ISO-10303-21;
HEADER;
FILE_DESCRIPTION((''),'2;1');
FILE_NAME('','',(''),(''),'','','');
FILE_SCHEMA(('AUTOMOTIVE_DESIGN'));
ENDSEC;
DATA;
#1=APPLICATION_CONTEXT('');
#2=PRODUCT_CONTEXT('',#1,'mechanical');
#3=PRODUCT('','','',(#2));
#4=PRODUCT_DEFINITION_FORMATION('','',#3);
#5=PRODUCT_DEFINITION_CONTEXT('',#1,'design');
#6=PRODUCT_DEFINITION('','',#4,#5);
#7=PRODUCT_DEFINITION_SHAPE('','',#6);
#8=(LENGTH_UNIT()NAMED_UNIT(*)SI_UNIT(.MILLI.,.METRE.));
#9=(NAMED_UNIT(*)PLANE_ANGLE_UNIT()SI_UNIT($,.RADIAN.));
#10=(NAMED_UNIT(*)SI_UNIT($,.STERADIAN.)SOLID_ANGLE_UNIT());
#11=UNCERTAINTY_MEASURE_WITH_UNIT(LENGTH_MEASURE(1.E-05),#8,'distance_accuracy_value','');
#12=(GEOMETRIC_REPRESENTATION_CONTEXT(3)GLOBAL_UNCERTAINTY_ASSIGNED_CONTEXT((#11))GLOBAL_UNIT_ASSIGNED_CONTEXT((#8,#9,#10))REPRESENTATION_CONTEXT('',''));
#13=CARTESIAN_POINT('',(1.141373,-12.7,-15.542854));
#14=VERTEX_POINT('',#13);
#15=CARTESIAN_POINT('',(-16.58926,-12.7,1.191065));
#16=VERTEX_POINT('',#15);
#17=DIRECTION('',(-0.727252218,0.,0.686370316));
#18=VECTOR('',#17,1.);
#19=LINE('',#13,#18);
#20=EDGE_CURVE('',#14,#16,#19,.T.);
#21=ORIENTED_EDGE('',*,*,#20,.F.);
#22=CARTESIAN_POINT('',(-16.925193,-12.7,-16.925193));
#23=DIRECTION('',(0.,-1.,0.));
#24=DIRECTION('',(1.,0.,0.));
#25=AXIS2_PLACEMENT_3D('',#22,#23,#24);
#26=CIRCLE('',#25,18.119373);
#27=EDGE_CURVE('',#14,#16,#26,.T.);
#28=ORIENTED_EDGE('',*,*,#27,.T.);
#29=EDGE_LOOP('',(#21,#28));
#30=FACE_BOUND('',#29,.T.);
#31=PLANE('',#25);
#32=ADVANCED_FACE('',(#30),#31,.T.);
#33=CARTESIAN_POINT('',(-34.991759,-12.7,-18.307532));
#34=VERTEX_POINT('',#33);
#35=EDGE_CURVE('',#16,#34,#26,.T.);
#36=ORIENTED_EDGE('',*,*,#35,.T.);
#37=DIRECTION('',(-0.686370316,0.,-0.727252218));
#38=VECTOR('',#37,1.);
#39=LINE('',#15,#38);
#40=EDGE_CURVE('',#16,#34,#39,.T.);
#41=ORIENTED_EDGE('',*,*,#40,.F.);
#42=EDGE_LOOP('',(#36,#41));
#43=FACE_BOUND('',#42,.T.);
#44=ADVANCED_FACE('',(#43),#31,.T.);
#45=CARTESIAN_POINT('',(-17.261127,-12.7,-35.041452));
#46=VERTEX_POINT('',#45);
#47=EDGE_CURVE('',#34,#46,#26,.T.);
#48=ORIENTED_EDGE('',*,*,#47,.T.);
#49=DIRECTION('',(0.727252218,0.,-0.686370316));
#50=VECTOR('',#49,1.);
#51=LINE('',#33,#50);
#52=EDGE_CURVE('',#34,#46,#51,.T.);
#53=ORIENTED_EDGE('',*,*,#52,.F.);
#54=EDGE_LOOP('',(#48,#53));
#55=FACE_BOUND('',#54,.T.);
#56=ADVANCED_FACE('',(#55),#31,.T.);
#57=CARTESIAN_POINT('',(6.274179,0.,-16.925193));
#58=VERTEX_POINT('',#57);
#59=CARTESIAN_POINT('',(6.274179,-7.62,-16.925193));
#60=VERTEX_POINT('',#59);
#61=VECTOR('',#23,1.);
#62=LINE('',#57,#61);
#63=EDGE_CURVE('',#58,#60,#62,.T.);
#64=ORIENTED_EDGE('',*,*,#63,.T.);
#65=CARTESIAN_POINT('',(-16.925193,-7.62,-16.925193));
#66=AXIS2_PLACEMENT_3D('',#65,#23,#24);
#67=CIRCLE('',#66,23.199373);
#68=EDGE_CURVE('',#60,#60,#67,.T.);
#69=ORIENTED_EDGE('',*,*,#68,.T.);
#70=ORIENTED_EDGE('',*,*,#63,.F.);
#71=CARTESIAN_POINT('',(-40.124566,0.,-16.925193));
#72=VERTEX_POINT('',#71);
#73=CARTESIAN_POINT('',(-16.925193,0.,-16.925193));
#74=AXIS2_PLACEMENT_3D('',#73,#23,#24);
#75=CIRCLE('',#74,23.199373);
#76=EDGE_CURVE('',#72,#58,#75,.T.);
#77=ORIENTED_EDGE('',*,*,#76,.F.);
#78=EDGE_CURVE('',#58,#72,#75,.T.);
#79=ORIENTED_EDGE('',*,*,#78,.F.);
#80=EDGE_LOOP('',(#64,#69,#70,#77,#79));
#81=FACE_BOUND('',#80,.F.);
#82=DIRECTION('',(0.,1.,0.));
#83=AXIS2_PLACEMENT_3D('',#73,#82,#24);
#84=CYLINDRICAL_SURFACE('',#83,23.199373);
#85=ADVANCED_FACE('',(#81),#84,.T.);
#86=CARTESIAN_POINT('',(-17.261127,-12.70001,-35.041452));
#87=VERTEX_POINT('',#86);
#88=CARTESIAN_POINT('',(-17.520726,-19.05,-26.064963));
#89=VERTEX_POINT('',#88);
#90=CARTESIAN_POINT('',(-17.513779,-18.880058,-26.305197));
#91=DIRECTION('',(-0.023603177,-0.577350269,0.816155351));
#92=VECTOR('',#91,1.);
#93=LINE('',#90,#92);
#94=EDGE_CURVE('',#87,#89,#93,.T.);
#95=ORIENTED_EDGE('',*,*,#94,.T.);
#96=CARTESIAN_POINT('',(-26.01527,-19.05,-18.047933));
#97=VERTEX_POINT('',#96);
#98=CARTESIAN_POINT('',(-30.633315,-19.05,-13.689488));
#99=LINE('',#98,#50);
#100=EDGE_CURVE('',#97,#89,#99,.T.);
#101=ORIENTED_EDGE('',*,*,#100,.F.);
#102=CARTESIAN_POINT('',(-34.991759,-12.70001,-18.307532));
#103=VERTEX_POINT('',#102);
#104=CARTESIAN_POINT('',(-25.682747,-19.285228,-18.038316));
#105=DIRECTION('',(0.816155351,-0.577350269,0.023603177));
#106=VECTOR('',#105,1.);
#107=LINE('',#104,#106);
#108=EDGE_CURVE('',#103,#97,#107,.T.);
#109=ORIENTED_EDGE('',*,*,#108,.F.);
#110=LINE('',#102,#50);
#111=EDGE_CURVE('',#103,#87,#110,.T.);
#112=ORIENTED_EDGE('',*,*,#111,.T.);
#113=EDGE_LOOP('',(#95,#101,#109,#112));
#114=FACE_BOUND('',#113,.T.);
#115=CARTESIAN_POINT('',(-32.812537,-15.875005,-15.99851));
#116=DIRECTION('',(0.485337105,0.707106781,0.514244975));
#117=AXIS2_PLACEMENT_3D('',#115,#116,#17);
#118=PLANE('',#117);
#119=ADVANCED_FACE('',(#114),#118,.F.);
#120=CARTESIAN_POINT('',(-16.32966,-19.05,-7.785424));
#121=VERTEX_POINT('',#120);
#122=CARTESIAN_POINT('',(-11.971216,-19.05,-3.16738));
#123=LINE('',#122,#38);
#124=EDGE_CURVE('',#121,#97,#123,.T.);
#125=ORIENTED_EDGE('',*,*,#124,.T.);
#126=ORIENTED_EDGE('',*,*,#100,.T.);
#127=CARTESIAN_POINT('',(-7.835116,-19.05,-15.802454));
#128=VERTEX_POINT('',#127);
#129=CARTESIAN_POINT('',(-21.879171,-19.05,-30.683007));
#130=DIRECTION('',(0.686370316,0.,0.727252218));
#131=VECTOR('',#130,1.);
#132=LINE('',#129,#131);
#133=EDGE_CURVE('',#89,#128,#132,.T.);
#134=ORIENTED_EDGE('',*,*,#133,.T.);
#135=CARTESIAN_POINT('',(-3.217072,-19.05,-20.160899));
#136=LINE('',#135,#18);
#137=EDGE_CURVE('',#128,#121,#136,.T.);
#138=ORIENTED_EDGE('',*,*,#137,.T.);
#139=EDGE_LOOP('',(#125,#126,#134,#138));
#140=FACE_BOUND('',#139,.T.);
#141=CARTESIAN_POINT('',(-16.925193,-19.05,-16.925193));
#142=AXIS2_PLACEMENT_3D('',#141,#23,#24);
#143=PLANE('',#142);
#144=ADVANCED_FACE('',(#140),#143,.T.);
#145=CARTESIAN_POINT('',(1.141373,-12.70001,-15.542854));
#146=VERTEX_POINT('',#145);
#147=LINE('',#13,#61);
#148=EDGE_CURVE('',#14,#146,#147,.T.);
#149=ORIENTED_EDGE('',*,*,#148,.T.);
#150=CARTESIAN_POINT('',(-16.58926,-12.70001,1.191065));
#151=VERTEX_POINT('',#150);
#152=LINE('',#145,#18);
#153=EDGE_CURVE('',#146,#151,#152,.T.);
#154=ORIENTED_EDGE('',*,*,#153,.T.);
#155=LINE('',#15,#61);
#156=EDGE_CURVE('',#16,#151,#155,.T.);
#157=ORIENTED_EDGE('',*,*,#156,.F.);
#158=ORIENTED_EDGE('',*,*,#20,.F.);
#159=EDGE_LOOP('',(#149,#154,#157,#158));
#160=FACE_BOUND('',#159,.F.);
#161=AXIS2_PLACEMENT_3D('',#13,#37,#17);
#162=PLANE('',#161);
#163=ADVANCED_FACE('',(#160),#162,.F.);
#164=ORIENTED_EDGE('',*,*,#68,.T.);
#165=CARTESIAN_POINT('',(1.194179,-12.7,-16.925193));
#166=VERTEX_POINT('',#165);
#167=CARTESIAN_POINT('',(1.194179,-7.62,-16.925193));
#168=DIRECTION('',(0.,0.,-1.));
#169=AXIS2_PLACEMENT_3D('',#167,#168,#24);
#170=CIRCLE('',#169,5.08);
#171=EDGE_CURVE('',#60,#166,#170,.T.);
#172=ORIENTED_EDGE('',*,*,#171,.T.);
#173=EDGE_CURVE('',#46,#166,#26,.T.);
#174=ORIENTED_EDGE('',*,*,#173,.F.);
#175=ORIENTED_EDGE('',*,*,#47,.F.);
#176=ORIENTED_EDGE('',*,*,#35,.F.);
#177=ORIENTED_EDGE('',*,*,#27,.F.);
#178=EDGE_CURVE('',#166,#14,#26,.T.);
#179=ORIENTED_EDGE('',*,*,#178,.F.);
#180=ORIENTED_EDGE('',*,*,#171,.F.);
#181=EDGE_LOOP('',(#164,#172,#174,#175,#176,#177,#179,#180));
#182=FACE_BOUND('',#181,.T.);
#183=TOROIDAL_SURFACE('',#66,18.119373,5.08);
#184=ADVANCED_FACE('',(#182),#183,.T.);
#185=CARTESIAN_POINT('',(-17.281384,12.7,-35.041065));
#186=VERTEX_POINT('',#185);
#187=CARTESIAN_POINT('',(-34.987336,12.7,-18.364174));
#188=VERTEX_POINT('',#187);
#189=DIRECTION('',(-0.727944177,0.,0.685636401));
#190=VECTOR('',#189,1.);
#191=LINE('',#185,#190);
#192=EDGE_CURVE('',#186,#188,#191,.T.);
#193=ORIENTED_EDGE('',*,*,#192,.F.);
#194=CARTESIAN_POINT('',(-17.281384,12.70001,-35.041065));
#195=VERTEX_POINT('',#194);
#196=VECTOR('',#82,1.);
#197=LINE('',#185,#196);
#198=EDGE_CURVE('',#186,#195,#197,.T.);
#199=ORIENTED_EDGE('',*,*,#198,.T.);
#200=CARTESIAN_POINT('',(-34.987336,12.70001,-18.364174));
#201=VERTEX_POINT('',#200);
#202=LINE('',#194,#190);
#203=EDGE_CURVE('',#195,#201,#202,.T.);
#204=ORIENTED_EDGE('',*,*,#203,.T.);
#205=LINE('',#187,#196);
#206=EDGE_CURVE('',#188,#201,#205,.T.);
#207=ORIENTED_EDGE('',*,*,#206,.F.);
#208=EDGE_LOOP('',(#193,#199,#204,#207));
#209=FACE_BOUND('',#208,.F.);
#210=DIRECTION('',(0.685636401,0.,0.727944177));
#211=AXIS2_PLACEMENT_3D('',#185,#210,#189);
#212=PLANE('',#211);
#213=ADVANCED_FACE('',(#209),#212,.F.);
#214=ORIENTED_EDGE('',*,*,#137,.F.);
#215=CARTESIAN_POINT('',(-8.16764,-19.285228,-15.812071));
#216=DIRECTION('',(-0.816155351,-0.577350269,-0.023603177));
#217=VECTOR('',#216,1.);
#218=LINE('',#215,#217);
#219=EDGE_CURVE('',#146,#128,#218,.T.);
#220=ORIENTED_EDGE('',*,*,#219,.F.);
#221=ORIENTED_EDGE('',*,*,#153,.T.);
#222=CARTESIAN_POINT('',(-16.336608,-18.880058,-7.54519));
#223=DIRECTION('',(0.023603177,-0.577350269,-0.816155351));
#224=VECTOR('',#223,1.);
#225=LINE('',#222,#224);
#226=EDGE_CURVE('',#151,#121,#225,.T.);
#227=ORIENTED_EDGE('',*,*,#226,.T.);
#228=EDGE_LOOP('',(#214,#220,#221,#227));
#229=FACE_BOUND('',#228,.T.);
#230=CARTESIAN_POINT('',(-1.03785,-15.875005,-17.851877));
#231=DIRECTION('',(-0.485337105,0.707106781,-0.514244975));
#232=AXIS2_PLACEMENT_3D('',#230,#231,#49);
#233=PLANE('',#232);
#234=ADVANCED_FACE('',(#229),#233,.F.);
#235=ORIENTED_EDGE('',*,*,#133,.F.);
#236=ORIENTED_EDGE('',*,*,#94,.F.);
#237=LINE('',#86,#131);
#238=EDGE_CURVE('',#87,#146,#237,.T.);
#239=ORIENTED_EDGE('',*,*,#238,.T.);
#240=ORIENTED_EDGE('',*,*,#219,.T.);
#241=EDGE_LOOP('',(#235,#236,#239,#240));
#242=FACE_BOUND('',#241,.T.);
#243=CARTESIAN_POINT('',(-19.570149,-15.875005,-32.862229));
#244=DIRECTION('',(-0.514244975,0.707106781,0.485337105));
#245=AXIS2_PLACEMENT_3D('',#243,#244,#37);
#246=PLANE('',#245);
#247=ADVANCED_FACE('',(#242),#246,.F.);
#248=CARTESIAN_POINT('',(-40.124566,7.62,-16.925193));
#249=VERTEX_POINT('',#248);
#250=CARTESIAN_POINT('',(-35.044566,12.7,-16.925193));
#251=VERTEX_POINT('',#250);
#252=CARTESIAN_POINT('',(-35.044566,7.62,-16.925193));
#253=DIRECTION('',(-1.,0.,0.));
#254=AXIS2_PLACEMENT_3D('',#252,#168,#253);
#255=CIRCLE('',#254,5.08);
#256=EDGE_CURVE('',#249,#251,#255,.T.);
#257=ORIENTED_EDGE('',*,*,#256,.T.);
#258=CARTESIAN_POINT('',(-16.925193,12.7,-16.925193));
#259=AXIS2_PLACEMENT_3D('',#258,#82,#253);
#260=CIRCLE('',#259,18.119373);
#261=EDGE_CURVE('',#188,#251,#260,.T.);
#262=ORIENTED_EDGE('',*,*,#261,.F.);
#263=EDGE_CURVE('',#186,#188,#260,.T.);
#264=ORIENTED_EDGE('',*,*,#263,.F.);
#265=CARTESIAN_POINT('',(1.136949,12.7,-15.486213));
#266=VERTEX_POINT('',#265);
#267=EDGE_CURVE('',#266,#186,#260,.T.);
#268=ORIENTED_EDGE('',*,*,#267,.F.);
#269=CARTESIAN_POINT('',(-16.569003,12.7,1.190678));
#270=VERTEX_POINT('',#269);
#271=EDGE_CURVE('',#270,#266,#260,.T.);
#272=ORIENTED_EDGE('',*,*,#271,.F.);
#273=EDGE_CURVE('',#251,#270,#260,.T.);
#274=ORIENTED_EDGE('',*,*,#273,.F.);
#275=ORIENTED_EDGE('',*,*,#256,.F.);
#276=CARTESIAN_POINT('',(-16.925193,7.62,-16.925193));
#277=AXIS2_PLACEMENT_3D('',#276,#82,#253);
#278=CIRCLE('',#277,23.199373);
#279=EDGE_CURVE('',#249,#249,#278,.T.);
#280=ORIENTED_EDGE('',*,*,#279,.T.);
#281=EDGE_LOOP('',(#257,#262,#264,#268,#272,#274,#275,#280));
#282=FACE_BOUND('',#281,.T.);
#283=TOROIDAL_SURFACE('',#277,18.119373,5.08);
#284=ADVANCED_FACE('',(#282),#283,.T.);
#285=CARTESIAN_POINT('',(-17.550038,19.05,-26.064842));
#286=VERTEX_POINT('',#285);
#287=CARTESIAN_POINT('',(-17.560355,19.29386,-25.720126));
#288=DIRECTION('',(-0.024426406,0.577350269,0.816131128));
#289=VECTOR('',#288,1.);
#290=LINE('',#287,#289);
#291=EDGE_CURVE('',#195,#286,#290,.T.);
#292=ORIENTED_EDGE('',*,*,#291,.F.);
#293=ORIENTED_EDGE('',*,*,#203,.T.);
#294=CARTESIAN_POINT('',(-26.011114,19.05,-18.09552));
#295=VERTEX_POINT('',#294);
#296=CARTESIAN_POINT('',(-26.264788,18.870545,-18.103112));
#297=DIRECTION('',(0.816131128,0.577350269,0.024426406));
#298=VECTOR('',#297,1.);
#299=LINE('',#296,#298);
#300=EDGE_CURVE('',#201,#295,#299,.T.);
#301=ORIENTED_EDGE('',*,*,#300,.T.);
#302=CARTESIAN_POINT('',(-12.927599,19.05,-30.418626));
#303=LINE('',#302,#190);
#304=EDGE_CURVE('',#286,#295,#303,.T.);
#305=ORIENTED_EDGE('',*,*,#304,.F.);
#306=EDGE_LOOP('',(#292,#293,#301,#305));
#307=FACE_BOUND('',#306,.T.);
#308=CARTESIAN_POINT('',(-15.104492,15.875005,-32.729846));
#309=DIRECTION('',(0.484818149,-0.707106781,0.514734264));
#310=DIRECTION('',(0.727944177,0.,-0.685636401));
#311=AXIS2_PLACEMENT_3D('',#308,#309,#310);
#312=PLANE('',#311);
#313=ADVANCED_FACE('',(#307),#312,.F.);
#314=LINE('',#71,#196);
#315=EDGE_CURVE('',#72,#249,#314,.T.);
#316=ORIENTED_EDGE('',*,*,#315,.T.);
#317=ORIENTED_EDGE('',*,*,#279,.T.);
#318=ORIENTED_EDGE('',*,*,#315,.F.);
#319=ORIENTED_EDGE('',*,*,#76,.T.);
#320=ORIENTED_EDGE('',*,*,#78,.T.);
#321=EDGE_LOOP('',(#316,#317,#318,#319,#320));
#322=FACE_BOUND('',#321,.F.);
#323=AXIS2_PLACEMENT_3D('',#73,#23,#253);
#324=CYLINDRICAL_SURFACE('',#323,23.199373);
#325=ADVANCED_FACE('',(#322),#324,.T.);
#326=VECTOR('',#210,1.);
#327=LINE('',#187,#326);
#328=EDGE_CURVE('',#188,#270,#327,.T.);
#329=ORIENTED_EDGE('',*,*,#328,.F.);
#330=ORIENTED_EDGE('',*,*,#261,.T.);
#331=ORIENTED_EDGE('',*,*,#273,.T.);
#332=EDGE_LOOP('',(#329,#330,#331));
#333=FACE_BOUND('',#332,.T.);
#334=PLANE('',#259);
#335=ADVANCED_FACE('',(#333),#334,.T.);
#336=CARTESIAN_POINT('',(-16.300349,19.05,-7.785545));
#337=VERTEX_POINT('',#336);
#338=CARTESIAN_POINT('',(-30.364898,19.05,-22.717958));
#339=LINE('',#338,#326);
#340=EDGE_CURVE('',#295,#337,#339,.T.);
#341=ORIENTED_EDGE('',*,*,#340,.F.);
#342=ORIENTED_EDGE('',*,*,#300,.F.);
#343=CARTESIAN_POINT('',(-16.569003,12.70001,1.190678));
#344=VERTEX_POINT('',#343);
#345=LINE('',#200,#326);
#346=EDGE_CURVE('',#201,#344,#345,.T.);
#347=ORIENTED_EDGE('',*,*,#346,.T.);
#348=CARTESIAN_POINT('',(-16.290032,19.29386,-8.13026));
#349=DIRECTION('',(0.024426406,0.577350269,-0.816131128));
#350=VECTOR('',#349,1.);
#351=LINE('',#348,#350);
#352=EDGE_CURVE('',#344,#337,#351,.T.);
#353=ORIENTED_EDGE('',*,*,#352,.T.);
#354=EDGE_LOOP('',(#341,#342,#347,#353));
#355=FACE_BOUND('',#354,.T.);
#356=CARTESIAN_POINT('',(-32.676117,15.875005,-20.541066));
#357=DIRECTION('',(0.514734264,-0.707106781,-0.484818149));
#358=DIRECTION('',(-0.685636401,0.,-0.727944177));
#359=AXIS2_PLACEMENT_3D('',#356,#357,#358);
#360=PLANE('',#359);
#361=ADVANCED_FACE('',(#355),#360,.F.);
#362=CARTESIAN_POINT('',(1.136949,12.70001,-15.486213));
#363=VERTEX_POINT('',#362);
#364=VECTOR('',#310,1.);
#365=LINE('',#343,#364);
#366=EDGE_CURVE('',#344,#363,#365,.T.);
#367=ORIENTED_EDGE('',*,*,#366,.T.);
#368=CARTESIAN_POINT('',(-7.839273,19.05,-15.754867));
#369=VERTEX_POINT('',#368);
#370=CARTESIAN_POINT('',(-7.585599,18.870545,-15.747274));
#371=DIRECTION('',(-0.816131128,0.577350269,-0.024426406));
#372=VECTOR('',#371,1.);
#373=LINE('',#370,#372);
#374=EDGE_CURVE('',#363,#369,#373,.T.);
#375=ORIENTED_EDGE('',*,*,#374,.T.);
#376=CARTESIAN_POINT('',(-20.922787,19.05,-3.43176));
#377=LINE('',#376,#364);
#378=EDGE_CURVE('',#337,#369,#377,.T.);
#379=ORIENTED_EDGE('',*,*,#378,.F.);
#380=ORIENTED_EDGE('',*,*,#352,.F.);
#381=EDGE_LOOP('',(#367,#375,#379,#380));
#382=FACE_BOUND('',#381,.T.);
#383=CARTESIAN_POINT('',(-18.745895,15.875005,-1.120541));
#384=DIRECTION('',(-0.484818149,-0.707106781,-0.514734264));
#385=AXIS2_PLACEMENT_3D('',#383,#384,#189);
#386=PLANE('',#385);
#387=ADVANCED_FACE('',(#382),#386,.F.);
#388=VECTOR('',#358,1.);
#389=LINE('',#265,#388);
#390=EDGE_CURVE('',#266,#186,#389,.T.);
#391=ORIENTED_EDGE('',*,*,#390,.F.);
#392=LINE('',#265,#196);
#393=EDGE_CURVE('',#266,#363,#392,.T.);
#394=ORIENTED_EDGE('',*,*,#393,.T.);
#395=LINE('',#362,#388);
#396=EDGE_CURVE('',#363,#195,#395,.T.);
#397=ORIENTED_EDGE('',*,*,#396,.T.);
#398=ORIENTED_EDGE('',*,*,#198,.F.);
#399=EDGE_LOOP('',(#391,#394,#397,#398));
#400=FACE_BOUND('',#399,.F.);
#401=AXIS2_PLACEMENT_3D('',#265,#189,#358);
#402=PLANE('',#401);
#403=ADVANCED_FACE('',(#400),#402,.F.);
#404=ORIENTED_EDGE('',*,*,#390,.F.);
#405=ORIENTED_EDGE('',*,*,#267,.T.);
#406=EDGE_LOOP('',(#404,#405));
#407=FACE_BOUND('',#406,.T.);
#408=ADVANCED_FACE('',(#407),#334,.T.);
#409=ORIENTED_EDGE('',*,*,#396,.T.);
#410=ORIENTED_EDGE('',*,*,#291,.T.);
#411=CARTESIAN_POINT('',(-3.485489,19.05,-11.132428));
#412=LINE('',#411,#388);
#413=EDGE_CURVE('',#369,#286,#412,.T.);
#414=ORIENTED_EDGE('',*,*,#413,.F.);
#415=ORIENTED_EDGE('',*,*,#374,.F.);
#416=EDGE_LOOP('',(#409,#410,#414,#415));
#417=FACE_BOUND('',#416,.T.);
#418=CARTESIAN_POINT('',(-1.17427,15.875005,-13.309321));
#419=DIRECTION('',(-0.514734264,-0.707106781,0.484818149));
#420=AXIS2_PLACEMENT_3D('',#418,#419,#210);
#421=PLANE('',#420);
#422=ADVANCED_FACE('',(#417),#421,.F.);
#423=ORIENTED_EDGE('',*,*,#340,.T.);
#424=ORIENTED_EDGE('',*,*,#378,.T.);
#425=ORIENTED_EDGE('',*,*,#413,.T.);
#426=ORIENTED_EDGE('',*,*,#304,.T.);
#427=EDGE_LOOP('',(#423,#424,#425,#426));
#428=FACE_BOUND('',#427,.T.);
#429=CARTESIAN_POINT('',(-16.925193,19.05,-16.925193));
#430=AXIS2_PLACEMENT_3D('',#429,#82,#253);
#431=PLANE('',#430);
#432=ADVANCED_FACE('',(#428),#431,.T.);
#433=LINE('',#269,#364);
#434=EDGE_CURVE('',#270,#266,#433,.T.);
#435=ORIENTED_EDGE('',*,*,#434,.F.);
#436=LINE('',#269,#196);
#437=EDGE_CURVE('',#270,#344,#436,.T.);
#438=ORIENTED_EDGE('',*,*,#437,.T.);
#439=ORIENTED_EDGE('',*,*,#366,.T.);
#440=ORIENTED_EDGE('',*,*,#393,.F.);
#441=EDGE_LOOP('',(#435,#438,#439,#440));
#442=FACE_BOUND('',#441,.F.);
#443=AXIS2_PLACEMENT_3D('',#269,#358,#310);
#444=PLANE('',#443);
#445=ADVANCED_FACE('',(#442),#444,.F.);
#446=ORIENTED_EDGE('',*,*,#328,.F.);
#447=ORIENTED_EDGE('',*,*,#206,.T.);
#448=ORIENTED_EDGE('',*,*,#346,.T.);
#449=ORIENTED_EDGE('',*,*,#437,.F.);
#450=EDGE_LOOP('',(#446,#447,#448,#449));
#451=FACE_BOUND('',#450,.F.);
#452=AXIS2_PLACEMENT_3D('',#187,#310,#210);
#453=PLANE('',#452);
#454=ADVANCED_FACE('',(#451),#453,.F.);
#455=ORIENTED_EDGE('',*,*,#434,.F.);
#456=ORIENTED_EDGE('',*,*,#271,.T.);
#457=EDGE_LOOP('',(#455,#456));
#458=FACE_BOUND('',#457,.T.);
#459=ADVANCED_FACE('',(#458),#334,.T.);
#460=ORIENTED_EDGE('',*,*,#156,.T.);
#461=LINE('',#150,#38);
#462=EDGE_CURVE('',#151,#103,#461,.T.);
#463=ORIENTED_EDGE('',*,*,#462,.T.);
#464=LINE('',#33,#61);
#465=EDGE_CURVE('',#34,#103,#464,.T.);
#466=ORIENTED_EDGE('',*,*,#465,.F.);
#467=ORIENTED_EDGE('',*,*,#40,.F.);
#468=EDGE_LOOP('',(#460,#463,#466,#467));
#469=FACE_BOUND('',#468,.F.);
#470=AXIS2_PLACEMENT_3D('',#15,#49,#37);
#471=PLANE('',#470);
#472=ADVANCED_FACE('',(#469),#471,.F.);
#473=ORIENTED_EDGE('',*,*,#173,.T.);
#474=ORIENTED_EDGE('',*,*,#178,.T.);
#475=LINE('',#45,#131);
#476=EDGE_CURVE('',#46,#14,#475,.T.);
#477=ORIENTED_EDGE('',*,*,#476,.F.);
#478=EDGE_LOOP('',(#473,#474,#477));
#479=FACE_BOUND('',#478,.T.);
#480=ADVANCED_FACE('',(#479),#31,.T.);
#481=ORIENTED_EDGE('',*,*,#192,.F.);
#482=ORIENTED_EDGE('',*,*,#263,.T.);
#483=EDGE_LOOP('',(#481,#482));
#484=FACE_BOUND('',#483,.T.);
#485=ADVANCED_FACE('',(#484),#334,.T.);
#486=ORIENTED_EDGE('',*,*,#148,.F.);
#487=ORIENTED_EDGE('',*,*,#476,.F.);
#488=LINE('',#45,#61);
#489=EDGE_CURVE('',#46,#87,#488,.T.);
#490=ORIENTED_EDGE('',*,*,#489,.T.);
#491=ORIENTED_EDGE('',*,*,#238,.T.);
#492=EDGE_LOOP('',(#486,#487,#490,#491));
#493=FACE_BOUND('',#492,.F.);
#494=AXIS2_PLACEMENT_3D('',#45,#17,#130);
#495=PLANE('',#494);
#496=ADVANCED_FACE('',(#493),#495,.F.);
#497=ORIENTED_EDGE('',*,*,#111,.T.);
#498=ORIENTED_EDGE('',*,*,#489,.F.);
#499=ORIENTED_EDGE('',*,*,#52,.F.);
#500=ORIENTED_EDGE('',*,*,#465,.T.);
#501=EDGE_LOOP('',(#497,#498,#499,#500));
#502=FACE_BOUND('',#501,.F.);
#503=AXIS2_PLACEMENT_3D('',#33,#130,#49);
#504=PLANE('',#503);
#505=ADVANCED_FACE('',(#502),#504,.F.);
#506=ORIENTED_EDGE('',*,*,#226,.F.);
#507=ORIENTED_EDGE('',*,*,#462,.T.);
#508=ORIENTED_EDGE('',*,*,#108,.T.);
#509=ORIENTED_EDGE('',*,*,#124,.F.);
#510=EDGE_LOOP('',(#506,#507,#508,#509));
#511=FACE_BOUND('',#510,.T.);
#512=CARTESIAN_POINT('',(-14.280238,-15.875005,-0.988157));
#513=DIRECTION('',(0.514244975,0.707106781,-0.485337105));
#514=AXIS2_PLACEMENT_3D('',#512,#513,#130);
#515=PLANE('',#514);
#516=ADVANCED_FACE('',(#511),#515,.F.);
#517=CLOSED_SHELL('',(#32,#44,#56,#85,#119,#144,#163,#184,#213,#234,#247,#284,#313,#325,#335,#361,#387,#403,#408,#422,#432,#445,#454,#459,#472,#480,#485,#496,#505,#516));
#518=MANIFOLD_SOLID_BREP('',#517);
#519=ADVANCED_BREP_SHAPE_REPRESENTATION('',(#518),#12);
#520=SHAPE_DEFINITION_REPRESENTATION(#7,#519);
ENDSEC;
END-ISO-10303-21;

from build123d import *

# Parameters (mm, degrees)
F0_R     = 23.1993727041
F1_DEPTH = 12.7
F2_R     = 23.1993727041
F3_DEPTH = 12.7
F4_R     = 5.08
F7_DEPTH = 6.35
F8_DEPTH = 6.35
F9_SIZE  = 6.34999
F10_SIZE = 6.34999


# Not quite as in the source:
# - a fillet or chamfer is up to 0.001 mm smaller than in the source, because OpenCascade refuses the exact size


with BuildPart() as f1:
    # F0 (on Front) → F1 (new body)
    with BuildSketch(Plane.XZ):
        with Locations((-16.9251933694, -16.9251933694)):
            Circle(F0_R)
    extrude(amount=F1_DEPTH)

    # F2 (on face) → F3 (join)
    with BuildSketch(Plane(origin=(0, 0, 0), x_dir=(-1, 0, 0), z_dir=(0, 1, 0))):
        with Locations((16.9251933694, -16.9251933694)):
            Circle(F2_R)
    extrude(amount=F3_DEPTH)

    # F4
    f4_edges = [f1.edges().sort_by_distance(p)[0] for p in [
        (6.274179, 12.7, -16.925193),
        (-16.925193, 0, 6.274179),
        (-16.925193, 0, -40.124566),
        (6.274179, -6.35, -16.925193),
        (-40.124566, -12.7, -16.925193),
        (-40.124566, 6.35, -16.925193),
    ]]
    fillet(f4_edges, radius=F4_R)

    # F5 (on face) → F7 (join)
    with BuildSketch(Plane(origin=(0, 12.7, 0), x_dir=(-1, 0, 0), z_dir=(0, 1, 0))):
        Polygon((34.987336153, -18.3641740003), (16.5690030176, 1.1906780042), (-1.1369494142, -15.4862127385), (17.2813837212, -35.041064743), align=None)
    extrude(amount=F7_DEPTH)

    # F6 (on face) → F8 (join)
    with BuildSketch(Plane.XZ.offset(12.7)):
        Polygon((1.1413726115, -15.5428544637), (-16.5892601531, 1.1910649658), (-34.9917593503, -18.3075322751), (-17.2611265857, -35.0414517045), align=None)
    extrude(amount=F8_DEPTH)

    # F9 (size 6.35 in the source; OpenCascade refuses exactly that, so slightly less here)
    f9_edges = [f1.edges().sort_by_distance(p)[0] for p in [
        (-8.072217, 19.05, -25.263639),
        (-26.13436, 19.05, -26.702619),
        (-25.77817, 19.05, -8.586748),
        (-7.716027, 19.05, -7.147767),
    ]]
    chamfer(f9_edges, length=F9_SIZE)

    # F10 (size 6.35 in the source; OpenCascade refuses exactly that, so slightly less here)
    f10_edges = [f1.edges().sort_by_distance(p)[0] for p in [
        (-8.059877, -19.05, -25.292153),
        (-7.723944, -19.05, -7.175895),
        (-25.79051, -19.05, -8.558234),
        (-26.126443, -19.05, -26.674492),
    ]]
    chamfer(f10_edges, length=F10_SIZE)


solid = f1.part
